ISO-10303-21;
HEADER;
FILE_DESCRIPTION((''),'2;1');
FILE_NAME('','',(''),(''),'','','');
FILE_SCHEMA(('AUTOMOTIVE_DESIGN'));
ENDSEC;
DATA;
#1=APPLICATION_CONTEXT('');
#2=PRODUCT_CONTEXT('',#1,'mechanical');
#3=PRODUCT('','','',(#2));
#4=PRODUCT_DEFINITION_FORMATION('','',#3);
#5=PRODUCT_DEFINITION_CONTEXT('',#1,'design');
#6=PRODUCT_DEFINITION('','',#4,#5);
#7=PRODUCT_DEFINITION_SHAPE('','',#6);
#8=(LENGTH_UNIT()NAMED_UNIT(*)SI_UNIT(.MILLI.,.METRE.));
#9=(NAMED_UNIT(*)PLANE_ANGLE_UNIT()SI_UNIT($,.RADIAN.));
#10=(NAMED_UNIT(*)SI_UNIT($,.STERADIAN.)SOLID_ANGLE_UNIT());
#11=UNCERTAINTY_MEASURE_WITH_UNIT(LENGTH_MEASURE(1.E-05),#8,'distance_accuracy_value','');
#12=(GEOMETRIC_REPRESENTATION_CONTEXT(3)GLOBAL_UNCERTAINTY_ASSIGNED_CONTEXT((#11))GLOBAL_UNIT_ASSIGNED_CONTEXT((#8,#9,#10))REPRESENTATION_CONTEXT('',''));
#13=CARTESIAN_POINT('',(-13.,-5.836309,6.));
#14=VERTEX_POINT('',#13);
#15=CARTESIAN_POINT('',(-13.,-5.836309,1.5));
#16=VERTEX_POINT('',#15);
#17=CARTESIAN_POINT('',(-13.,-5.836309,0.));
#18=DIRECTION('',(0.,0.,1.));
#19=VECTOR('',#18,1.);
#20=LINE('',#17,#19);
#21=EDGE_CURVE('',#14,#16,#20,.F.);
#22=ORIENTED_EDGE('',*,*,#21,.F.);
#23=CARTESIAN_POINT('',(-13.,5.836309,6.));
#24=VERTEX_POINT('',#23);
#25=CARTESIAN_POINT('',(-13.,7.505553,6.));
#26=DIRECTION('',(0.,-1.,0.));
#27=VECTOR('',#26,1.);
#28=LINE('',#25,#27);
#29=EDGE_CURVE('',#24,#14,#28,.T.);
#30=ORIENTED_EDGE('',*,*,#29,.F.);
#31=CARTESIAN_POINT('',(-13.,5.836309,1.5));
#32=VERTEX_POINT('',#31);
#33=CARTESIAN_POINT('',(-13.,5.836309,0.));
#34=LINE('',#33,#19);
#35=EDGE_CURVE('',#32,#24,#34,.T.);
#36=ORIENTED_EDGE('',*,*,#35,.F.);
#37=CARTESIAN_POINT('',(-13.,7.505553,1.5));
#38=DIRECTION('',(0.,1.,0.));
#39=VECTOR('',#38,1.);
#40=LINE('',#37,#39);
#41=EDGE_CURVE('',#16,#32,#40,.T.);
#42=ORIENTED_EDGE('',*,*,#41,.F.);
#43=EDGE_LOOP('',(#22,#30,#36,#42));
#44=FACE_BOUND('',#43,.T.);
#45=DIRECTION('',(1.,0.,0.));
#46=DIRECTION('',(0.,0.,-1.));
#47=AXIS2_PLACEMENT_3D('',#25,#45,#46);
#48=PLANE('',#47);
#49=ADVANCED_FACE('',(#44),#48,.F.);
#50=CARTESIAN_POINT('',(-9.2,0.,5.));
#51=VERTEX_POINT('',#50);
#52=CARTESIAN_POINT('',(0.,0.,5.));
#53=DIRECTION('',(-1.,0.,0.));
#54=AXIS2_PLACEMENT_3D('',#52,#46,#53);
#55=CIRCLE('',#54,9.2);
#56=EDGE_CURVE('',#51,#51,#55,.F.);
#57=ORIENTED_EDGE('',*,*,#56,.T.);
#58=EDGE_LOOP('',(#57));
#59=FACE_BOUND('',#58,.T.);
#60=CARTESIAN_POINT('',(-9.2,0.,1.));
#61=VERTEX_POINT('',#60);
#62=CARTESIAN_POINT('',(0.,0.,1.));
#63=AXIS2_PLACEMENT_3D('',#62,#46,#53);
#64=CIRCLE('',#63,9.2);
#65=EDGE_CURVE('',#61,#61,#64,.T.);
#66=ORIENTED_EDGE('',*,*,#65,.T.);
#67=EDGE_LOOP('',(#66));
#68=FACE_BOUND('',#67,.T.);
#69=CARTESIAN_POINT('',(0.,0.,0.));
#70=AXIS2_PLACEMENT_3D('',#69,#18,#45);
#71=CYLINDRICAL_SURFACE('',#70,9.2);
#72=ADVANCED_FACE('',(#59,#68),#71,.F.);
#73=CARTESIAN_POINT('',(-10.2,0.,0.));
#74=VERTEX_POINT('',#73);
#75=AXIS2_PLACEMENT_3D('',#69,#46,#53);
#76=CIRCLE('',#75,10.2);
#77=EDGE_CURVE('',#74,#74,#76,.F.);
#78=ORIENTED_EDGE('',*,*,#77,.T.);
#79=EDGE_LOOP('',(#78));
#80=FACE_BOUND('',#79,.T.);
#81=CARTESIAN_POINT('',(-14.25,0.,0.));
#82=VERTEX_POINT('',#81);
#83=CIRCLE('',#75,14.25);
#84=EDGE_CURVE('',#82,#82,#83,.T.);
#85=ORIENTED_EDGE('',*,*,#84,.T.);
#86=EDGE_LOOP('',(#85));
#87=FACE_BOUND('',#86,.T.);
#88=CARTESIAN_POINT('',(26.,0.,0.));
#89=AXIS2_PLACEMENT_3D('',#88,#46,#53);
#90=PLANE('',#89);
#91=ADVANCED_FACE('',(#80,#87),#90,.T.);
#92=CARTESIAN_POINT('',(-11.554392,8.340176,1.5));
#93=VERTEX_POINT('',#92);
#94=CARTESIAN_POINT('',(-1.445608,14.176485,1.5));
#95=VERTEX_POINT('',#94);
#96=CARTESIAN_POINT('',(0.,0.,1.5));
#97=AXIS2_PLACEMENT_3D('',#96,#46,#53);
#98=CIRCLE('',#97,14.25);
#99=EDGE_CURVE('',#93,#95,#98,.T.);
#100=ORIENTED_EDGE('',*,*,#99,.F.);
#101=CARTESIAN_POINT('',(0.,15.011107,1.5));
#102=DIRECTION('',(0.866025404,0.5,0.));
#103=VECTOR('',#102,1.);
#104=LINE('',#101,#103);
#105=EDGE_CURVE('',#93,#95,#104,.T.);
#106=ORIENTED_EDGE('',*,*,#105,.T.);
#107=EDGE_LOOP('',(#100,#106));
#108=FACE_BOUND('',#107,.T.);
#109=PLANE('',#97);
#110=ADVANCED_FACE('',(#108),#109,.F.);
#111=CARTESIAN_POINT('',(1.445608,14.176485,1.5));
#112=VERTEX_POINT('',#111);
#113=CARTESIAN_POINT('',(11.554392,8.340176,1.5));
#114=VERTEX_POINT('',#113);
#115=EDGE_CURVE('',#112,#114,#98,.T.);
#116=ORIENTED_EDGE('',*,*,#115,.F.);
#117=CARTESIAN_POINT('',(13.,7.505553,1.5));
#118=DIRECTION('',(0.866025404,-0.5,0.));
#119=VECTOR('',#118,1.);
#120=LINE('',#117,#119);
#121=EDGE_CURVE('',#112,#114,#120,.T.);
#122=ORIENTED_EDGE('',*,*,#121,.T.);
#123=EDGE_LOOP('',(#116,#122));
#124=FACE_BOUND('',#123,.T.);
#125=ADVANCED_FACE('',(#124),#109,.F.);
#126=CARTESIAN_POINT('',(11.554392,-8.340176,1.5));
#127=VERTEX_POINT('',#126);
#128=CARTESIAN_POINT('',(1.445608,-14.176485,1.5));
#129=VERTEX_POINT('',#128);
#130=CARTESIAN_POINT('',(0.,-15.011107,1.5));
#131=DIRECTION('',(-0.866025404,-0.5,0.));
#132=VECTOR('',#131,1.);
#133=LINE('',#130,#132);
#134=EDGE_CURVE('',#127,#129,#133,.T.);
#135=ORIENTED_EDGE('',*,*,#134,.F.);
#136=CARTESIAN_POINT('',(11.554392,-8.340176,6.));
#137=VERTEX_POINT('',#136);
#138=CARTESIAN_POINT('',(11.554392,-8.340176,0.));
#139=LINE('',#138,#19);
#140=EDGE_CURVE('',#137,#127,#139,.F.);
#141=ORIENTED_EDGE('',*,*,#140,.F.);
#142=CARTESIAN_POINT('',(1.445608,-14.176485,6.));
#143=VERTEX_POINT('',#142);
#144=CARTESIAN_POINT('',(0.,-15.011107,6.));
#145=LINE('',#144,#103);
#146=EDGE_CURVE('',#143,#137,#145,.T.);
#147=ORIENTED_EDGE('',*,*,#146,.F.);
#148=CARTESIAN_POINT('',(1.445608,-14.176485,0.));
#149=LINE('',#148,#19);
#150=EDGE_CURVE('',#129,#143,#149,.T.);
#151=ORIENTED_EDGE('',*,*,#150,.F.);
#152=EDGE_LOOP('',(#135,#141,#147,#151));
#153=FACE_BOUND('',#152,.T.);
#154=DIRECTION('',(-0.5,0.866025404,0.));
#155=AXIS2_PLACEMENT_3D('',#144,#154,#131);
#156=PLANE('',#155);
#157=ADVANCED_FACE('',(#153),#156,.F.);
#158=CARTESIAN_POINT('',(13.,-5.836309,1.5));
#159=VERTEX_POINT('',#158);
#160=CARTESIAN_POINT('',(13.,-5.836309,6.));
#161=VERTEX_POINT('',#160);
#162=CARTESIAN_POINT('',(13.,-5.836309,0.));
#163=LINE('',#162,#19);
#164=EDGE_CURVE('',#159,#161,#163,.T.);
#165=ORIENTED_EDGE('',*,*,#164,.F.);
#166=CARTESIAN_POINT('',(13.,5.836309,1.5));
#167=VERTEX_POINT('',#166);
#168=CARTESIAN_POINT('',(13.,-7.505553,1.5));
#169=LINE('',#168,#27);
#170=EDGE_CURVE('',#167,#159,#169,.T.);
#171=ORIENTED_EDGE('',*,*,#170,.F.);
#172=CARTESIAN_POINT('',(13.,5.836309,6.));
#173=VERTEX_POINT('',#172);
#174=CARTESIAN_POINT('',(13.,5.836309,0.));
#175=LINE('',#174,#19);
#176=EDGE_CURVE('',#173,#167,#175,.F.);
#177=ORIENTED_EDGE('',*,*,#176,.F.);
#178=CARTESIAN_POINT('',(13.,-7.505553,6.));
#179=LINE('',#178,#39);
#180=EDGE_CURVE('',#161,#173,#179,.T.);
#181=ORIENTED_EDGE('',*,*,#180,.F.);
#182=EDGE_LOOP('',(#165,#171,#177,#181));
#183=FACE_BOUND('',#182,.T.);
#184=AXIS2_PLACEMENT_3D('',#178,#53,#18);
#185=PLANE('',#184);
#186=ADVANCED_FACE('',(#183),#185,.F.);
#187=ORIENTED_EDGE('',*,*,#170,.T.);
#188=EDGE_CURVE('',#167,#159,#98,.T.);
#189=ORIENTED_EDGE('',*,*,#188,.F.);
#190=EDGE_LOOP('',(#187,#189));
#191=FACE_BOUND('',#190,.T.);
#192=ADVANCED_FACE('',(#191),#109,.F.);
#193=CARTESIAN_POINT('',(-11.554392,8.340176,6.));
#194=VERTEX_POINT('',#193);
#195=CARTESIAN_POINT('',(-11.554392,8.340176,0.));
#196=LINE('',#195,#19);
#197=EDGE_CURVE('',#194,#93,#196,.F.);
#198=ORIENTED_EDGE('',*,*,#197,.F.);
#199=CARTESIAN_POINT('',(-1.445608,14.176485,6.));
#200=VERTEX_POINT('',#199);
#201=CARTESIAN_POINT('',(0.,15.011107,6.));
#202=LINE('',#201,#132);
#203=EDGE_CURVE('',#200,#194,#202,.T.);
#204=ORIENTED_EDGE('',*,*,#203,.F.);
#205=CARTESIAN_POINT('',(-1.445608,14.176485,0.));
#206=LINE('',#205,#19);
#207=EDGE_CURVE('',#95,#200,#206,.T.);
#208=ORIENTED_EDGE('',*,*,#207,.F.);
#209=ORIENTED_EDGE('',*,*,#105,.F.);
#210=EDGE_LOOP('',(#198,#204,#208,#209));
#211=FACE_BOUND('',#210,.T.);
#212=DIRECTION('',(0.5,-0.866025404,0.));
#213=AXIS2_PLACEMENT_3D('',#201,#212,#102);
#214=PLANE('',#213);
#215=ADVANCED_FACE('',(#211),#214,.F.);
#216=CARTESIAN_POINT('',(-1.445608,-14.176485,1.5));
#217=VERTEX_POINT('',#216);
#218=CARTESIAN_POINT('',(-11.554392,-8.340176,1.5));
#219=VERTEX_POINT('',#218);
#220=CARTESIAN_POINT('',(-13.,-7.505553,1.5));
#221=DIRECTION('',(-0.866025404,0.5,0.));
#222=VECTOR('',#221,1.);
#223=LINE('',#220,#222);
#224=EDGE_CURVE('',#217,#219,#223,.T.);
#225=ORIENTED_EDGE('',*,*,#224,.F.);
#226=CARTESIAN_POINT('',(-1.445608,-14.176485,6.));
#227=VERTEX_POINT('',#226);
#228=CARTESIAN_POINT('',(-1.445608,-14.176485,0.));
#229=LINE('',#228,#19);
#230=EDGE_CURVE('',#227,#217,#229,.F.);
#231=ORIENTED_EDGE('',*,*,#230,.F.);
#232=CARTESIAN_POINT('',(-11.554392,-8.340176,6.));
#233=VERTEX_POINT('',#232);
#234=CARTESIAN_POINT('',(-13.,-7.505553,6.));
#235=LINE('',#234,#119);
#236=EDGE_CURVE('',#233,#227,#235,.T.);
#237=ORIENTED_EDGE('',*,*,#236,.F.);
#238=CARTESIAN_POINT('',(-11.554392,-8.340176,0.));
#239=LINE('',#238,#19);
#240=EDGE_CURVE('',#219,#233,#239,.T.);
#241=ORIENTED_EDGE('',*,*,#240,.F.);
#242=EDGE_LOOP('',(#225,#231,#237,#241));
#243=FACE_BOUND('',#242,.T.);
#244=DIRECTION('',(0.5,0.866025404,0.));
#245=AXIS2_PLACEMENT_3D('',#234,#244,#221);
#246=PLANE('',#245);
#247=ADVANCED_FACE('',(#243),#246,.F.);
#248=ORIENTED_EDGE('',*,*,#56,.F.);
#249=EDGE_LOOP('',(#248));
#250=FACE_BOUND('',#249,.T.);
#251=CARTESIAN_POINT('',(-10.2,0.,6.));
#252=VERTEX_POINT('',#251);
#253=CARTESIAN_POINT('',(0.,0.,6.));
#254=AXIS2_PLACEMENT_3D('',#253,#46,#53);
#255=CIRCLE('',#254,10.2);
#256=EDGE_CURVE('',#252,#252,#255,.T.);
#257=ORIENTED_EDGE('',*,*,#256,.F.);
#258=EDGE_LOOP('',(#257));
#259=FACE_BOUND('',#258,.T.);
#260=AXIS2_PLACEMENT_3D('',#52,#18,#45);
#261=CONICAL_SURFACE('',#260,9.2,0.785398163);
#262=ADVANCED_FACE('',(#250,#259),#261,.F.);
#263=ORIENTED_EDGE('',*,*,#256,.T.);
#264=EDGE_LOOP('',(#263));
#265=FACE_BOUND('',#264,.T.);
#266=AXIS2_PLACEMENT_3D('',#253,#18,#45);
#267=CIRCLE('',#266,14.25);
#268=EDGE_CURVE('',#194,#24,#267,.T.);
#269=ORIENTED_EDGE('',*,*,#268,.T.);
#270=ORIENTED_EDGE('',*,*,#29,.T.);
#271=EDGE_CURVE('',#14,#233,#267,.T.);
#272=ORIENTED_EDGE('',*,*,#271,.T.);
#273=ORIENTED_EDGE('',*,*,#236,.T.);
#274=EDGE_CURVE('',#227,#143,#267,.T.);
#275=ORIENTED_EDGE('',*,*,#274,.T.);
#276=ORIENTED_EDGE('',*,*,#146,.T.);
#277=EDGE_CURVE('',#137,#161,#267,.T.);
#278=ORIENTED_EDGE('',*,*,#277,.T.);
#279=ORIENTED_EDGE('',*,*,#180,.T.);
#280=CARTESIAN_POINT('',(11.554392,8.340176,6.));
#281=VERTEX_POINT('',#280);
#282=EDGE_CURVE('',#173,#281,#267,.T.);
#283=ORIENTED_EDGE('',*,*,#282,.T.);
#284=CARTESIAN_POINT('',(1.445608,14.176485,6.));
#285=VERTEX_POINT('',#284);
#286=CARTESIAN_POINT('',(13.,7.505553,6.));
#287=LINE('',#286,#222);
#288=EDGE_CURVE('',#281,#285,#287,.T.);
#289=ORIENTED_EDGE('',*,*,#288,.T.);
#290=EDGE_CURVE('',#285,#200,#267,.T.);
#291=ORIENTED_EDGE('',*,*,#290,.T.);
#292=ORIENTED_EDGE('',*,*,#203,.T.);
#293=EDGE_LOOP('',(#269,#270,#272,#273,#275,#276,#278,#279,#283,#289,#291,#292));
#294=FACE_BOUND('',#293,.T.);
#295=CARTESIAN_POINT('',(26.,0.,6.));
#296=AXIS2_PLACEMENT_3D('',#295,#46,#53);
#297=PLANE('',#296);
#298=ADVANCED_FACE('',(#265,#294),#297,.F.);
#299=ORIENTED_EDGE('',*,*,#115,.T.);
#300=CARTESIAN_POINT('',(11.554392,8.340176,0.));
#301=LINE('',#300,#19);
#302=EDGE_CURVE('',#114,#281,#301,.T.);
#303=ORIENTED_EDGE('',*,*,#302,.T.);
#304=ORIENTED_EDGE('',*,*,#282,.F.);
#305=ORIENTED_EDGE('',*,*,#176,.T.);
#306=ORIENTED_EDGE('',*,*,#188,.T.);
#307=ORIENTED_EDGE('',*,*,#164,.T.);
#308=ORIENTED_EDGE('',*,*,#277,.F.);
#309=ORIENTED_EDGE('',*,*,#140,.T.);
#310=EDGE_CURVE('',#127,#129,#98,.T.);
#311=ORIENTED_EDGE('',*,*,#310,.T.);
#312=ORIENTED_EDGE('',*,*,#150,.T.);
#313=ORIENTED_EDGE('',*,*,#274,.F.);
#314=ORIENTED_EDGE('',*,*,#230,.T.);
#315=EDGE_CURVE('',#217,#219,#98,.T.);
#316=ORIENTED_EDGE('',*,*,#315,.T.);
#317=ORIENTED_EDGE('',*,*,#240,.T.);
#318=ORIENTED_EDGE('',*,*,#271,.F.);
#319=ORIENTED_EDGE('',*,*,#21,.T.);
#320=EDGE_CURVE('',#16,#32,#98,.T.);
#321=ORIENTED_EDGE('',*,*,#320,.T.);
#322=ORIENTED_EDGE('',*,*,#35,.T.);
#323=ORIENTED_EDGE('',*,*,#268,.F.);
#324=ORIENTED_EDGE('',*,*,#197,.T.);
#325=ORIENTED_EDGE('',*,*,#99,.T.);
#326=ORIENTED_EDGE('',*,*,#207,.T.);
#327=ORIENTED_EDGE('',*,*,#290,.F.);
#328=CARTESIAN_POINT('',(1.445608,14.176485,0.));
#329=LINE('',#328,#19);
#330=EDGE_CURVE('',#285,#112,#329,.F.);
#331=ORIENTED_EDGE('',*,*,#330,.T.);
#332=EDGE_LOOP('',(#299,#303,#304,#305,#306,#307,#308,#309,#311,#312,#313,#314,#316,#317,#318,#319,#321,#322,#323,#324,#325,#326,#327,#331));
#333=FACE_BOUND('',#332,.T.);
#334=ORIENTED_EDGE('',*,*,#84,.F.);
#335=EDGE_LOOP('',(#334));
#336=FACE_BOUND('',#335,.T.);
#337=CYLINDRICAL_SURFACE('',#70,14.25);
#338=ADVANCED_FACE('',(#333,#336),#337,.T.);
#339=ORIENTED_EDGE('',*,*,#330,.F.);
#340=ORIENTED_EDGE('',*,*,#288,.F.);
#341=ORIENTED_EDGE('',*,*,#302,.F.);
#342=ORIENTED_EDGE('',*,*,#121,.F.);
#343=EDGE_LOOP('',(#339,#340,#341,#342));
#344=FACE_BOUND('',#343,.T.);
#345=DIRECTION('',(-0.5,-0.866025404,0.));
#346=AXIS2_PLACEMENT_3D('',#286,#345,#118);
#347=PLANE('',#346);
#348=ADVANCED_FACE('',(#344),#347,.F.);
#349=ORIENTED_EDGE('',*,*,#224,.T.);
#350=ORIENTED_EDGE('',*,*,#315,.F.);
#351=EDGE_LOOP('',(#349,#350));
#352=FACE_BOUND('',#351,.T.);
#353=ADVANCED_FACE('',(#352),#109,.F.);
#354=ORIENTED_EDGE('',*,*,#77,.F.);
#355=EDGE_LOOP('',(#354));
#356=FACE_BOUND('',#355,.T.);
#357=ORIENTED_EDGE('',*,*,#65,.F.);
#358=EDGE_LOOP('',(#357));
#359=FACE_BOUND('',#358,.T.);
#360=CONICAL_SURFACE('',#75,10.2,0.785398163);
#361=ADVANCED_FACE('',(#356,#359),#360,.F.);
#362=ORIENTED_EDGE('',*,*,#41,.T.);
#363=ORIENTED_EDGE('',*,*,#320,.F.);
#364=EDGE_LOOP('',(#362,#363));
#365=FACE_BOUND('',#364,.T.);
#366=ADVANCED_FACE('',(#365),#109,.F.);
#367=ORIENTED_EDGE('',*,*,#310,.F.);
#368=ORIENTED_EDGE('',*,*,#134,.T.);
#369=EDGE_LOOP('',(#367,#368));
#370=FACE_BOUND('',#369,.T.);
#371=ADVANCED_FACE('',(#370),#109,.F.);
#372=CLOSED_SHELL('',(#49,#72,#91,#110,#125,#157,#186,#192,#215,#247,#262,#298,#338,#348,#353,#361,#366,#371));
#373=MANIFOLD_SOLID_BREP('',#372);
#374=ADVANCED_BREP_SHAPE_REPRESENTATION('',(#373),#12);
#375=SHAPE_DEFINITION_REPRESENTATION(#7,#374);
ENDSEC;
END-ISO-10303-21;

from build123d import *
from build123d.topology import SkipClean

# Parameters (mm, degrees)
EXTRUDE_1_DEPTH     = 6
SKETCH_2_R          = 15.011106999
SKETCH_2_R_2        = 14.25
CUT_EXTRUDE_1_DEPTH = 21.744477177
EXTRUDE_START       = -1.5
SKETCH_4_R          = 14.25
EXTRUDE_3_DEPTH     = 1.5
SKETCH_5_R          = 9.2
CUT_EXTRUDE_2_DEPTH = 22.026768653
CHAMFER_1_SIZE      = 1


with BuildPart() as part:
    # Эскиз1 → Вытянуть1 (new body)
    with BuildSketch(Plane.XY):
        Polygon((0, 15.011106999), (-13, 7.505553499), (-13, -7.505553499), (0, -15.011106999), (13, -7.505553499), (13, 7.505553499), align=None)
    extrude(amount=EXTRUDE_1_DEPTH)

    # Эскиз2 → Вырез-Вытянуть1 (cut, through all)
    with BuildSketch(Plane.XY.offset(6)):
        Circle(SKETCH_2_R)
        Circle(SKETCH_2_R_2, mode=Mode.SUBTRACT)
    extrude(amount=-CUT_EXTRUDE_1_DEPTH, mode=Mode.SUBTRACT)

    # Эскиз4 → Вытянуть3 (add)
    with SkipClean():  # the faces are left unmerged after this step: merging them gives an invalid solid
        with BuildSketch(Plane(origin=(0, 0, 0), x_dir=(-1, 0, 0), z_dir=(0, 0, -1)).offset(EXTRUDE_START)):
            Circle(SKETCH_4_R)
        extrude(amount=EXTRUDE_3_DEPTH)
    add(part.part.scale(1), mode=Mode.REPLACE)  # the faces are merged on a copy

    # Эскиз5 → Вырез-Вытянуть2 (cut, through all)
    with BuildSketch(Plane.XY.offset(6)):
        Circle(SKETCH_5_R)
    extrude(amount=-CUT_EXTRUDE_2_DEPTH, mode=Mode.SUBTRACT)

    # Фаска1
    chamfer_1_edges = [part.edges().sort_by_distance(p)[0] for p in [
        (-9.2, 0, 0),
        (-9.2, 0, 6),
    ]]
    chamfer(chamfer_1_edges, length=CHAMFER_1_SIZE)


solid = part.part
